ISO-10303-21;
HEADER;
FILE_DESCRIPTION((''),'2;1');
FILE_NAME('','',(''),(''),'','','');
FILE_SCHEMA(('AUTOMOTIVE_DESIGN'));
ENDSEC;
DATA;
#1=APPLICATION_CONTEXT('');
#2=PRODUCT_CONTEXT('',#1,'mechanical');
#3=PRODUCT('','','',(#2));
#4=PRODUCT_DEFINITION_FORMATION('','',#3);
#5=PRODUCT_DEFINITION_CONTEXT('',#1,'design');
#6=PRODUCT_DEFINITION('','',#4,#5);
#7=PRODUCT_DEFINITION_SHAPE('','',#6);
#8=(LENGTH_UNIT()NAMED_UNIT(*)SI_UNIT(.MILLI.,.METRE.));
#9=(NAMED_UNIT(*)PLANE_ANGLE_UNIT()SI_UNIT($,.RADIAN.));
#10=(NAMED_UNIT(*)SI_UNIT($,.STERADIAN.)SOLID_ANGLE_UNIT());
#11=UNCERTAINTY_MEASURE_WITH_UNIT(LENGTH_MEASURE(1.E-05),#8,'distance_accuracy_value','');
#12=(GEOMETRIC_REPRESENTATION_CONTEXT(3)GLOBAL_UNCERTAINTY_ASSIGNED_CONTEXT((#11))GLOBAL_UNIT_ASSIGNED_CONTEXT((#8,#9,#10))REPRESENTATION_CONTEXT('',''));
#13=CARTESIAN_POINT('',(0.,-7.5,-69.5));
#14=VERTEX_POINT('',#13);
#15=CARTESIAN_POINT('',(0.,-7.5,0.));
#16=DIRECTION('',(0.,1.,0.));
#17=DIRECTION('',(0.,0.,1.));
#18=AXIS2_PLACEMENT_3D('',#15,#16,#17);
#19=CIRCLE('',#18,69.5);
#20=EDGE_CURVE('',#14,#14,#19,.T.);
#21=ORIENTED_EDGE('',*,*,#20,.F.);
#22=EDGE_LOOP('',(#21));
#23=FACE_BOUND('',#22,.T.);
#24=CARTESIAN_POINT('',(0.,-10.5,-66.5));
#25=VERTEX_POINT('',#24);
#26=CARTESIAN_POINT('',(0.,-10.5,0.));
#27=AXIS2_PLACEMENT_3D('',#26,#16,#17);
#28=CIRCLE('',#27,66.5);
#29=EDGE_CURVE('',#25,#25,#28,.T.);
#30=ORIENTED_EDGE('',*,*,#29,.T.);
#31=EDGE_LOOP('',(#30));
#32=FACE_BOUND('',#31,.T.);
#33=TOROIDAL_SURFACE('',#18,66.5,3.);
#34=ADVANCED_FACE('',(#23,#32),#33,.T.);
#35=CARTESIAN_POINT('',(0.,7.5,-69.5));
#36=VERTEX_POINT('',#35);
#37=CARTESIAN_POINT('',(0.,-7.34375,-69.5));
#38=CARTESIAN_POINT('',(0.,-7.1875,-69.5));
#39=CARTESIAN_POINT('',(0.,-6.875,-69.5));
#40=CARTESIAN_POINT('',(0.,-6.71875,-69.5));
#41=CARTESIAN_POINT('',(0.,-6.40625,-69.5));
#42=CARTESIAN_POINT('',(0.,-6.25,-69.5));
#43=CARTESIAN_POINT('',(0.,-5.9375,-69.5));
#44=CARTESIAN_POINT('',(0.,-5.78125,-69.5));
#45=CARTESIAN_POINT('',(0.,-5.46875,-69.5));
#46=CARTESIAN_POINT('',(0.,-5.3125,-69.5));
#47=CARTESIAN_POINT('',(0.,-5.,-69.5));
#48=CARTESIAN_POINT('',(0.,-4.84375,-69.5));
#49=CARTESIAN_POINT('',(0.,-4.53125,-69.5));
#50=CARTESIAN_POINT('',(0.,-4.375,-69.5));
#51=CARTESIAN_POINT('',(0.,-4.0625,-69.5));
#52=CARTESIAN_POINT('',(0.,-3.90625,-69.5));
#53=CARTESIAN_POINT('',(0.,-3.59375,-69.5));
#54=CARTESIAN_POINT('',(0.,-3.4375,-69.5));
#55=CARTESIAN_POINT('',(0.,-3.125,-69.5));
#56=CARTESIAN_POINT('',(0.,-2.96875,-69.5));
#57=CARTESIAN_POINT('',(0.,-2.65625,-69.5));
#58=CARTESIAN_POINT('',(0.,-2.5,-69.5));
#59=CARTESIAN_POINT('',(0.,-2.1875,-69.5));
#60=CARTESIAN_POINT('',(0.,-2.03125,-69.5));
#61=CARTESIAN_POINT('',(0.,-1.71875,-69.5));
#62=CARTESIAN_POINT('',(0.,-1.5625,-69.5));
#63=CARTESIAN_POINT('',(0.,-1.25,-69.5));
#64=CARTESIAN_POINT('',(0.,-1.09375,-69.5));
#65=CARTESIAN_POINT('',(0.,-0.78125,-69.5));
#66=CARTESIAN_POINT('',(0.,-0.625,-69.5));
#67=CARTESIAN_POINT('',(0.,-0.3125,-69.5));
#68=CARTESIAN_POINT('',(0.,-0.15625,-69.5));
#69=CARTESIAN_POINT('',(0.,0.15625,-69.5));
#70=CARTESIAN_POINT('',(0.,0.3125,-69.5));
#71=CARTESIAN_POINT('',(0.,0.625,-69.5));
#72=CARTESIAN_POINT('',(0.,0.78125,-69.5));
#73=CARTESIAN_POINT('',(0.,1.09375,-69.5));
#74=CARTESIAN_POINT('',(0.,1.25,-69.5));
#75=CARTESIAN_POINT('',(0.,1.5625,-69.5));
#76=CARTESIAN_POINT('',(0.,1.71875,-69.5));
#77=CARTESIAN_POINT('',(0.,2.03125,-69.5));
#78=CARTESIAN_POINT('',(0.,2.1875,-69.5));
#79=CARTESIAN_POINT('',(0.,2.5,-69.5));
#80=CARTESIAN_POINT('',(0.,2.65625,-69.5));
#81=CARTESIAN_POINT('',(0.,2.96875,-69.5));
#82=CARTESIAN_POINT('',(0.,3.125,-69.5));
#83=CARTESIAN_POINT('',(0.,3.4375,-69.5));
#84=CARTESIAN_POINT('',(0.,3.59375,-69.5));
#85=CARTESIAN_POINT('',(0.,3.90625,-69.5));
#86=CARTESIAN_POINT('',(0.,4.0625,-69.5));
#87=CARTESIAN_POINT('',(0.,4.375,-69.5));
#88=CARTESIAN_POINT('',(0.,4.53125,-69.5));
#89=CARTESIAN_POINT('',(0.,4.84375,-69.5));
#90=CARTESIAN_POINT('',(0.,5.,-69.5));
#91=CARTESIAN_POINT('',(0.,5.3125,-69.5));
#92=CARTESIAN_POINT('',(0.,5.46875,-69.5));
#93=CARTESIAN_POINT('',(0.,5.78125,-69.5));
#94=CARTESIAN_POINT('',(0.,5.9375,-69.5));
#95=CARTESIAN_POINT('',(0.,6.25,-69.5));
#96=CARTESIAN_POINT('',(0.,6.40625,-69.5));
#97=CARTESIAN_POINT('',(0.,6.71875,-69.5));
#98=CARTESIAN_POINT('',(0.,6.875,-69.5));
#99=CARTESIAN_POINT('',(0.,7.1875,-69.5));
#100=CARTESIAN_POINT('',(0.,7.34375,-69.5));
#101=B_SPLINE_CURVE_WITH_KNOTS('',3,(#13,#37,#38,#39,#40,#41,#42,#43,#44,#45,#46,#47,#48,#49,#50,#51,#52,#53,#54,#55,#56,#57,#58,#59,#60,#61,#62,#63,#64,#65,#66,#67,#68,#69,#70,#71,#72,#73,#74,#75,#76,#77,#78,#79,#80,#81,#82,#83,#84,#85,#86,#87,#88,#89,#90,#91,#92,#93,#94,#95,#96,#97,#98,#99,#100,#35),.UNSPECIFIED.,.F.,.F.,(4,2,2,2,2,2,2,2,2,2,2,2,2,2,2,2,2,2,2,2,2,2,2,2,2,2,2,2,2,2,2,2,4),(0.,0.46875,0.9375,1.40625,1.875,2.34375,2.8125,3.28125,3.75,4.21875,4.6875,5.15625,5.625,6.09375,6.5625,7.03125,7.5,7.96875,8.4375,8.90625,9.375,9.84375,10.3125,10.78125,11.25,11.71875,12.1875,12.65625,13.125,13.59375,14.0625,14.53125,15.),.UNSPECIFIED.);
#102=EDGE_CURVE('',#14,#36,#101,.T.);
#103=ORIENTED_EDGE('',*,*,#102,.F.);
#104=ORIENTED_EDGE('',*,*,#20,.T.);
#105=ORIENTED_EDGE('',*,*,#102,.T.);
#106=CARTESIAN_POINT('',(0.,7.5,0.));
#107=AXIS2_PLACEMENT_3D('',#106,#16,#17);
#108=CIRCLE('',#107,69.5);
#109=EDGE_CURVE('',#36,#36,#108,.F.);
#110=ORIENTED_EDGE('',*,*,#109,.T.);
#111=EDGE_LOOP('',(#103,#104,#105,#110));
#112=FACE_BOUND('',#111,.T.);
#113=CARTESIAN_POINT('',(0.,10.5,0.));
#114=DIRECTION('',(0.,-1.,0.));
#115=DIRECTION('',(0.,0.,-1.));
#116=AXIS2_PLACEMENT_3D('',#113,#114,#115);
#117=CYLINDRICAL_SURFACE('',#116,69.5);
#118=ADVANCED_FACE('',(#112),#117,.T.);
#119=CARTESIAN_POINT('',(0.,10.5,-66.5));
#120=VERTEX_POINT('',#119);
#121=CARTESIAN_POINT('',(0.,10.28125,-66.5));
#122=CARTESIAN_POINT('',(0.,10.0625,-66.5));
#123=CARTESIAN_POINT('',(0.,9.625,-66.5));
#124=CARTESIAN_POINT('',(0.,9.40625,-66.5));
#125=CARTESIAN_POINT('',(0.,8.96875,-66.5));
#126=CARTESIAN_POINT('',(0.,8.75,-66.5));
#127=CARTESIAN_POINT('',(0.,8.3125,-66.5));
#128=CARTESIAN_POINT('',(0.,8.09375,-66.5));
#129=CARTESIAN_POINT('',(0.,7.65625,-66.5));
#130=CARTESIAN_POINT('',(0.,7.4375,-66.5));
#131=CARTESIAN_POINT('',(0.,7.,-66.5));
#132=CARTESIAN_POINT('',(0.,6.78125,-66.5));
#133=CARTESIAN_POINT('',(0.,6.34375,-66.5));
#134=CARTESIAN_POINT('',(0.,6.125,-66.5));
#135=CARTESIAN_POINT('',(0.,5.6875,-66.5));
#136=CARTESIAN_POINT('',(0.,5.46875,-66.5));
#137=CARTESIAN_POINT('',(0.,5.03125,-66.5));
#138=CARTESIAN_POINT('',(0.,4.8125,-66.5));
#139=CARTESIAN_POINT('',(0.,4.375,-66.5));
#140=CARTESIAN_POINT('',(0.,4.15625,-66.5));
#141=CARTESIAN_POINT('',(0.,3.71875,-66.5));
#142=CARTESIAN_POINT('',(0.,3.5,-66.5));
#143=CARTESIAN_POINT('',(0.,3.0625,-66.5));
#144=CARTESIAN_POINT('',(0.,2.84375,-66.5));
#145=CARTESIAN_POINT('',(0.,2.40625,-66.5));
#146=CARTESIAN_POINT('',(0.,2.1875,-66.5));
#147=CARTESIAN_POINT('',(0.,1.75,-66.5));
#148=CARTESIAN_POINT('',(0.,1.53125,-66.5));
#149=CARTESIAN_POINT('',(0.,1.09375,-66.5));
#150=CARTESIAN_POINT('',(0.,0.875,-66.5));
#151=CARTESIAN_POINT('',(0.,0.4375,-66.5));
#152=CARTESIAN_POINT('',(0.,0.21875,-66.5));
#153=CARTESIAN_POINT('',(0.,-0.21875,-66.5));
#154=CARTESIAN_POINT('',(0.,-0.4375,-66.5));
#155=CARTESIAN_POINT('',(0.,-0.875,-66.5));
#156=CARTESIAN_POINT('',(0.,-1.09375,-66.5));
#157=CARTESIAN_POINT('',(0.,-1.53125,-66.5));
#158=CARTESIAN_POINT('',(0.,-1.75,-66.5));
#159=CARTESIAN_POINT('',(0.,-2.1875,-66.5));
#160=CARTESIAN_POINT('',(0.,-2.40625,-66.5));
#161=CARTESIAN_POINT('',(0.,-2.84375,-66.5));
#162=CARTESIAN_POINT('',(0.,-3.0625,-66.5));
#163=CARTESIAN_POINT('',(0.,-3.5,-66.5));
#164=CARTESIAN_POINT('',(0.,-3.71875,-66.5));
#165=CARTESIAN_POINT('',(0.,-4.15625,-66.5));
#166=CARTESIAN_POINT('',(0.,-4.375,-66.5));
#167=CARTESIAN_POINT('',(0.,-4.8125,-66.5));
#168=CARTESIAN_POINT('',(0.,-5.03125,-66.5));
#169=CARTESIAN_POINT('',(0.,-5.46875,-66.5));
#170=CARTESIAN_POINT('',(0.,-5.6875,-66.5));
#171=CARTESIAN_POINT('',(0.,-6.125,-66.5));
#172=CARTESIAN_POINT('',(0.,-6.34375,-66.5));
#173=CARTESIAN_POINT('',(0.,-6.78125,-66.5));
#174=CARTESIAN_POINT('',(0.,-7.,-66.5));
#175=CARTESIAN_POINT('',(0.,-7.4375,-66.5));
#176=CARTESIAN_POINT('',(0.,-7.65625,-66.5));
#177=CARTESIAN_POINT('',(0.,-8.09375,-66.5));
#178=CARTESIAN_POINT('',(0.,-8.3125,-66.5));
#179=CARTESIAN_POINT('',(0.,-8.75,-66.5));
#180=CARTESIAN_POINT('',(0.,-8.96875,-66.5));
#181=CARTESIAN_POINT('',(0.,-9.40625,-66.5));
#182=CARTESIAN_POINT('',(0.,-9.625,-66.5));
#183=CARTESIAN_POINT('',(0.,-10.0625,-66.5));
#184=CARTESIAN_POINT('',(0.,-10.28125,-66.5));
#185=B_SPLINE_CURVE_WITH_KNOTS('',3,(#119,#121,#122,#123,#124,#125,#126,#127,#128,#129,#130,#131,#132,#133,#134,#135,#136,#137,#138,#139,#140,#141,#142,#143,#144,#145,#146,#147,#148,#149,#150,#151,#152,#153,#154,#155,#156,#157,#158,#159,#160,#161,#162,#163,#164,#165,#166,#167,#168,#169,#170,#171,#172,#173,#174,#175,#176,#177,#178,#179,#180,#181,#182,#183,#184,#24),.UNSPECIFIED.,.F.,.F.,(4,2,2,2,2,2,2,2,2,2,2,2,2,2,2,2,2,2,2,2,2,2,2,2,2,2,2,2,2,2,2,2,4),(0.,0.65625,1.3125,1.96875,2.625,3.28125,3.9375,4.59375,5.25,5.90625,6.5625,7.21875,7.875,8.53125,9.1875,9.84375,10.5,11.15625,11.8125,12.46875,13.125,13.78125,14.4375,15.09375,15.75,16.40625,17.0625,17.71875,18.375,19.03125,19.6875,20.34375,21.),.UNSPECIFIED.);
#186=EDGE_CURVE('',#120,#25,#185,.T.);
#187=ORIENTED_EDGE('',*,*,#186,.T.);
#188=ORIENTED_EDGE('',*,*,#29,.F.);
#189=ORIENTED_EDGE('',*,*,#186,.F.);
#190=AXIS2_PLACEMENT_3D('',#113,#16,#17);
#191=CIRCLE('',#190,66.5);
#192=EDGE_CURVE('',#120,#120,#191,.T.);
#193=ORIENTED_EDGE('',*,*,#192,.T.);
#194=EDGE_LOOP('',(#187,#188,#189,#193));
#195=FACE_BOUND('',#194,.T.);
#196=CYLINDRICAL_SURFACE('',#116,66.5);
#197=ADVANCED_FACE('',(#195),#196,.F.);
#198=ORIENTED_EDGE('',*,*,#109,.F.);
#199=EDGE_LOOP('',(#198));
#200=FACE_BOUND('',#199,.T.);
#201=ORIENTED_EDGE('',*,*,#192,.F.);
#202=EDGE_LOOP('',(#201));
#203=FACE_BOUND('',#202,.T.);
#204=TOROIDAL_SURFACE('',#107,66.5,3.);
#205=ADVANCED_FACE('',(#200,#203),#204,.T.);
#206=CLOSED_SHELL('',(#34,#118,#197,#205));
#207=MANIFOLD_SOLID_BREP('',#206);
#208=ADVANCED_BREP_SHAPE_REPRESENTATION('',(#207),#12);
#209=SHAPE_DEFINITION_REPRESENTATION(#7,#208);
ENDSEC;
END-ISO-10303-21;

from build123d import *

# Parameters (mm, degrees)
ESBO_O1_R                = 69.5
ESBO_O1_R_2              = 66.5
RESSALTO_EXTRUS_O1_DEPTH = 10.5
FILETE1_R                = 3


with BuildPart() as part:
    # Esboço1 → Ressalto-extrusão1 (new, symmetric)
    with BuildSketch(Plane(origin=(0, 0, 0), x_dir=(1, 0, 0), z_dir=(0, 1, 0))):
        with Locations(Location((0, 0, 0), (0, 0, 90))):
            Circle(ESBO_O1_R)
        with Locations(Location((0, 0, 0), (0, 0, 90))):
            Circle(ESBO_O1_R_2, mode=Mode.SUBTRACT)
    extrude(amount=RESSALTO_EXTRUS_O1_DEPTH, both=True)

    # Filete1
    filete1_edges = [part.edges().sort_by_distance(p)[0] for p in [
        (0, -10.5, 69.5),
        (0, 10.5, 69.5),
    ]]
    fillet(filete1_edges, radius=FILETE1_R - 0.0001)  # a hair under: the kernel refuses the full size


solid = part.part
